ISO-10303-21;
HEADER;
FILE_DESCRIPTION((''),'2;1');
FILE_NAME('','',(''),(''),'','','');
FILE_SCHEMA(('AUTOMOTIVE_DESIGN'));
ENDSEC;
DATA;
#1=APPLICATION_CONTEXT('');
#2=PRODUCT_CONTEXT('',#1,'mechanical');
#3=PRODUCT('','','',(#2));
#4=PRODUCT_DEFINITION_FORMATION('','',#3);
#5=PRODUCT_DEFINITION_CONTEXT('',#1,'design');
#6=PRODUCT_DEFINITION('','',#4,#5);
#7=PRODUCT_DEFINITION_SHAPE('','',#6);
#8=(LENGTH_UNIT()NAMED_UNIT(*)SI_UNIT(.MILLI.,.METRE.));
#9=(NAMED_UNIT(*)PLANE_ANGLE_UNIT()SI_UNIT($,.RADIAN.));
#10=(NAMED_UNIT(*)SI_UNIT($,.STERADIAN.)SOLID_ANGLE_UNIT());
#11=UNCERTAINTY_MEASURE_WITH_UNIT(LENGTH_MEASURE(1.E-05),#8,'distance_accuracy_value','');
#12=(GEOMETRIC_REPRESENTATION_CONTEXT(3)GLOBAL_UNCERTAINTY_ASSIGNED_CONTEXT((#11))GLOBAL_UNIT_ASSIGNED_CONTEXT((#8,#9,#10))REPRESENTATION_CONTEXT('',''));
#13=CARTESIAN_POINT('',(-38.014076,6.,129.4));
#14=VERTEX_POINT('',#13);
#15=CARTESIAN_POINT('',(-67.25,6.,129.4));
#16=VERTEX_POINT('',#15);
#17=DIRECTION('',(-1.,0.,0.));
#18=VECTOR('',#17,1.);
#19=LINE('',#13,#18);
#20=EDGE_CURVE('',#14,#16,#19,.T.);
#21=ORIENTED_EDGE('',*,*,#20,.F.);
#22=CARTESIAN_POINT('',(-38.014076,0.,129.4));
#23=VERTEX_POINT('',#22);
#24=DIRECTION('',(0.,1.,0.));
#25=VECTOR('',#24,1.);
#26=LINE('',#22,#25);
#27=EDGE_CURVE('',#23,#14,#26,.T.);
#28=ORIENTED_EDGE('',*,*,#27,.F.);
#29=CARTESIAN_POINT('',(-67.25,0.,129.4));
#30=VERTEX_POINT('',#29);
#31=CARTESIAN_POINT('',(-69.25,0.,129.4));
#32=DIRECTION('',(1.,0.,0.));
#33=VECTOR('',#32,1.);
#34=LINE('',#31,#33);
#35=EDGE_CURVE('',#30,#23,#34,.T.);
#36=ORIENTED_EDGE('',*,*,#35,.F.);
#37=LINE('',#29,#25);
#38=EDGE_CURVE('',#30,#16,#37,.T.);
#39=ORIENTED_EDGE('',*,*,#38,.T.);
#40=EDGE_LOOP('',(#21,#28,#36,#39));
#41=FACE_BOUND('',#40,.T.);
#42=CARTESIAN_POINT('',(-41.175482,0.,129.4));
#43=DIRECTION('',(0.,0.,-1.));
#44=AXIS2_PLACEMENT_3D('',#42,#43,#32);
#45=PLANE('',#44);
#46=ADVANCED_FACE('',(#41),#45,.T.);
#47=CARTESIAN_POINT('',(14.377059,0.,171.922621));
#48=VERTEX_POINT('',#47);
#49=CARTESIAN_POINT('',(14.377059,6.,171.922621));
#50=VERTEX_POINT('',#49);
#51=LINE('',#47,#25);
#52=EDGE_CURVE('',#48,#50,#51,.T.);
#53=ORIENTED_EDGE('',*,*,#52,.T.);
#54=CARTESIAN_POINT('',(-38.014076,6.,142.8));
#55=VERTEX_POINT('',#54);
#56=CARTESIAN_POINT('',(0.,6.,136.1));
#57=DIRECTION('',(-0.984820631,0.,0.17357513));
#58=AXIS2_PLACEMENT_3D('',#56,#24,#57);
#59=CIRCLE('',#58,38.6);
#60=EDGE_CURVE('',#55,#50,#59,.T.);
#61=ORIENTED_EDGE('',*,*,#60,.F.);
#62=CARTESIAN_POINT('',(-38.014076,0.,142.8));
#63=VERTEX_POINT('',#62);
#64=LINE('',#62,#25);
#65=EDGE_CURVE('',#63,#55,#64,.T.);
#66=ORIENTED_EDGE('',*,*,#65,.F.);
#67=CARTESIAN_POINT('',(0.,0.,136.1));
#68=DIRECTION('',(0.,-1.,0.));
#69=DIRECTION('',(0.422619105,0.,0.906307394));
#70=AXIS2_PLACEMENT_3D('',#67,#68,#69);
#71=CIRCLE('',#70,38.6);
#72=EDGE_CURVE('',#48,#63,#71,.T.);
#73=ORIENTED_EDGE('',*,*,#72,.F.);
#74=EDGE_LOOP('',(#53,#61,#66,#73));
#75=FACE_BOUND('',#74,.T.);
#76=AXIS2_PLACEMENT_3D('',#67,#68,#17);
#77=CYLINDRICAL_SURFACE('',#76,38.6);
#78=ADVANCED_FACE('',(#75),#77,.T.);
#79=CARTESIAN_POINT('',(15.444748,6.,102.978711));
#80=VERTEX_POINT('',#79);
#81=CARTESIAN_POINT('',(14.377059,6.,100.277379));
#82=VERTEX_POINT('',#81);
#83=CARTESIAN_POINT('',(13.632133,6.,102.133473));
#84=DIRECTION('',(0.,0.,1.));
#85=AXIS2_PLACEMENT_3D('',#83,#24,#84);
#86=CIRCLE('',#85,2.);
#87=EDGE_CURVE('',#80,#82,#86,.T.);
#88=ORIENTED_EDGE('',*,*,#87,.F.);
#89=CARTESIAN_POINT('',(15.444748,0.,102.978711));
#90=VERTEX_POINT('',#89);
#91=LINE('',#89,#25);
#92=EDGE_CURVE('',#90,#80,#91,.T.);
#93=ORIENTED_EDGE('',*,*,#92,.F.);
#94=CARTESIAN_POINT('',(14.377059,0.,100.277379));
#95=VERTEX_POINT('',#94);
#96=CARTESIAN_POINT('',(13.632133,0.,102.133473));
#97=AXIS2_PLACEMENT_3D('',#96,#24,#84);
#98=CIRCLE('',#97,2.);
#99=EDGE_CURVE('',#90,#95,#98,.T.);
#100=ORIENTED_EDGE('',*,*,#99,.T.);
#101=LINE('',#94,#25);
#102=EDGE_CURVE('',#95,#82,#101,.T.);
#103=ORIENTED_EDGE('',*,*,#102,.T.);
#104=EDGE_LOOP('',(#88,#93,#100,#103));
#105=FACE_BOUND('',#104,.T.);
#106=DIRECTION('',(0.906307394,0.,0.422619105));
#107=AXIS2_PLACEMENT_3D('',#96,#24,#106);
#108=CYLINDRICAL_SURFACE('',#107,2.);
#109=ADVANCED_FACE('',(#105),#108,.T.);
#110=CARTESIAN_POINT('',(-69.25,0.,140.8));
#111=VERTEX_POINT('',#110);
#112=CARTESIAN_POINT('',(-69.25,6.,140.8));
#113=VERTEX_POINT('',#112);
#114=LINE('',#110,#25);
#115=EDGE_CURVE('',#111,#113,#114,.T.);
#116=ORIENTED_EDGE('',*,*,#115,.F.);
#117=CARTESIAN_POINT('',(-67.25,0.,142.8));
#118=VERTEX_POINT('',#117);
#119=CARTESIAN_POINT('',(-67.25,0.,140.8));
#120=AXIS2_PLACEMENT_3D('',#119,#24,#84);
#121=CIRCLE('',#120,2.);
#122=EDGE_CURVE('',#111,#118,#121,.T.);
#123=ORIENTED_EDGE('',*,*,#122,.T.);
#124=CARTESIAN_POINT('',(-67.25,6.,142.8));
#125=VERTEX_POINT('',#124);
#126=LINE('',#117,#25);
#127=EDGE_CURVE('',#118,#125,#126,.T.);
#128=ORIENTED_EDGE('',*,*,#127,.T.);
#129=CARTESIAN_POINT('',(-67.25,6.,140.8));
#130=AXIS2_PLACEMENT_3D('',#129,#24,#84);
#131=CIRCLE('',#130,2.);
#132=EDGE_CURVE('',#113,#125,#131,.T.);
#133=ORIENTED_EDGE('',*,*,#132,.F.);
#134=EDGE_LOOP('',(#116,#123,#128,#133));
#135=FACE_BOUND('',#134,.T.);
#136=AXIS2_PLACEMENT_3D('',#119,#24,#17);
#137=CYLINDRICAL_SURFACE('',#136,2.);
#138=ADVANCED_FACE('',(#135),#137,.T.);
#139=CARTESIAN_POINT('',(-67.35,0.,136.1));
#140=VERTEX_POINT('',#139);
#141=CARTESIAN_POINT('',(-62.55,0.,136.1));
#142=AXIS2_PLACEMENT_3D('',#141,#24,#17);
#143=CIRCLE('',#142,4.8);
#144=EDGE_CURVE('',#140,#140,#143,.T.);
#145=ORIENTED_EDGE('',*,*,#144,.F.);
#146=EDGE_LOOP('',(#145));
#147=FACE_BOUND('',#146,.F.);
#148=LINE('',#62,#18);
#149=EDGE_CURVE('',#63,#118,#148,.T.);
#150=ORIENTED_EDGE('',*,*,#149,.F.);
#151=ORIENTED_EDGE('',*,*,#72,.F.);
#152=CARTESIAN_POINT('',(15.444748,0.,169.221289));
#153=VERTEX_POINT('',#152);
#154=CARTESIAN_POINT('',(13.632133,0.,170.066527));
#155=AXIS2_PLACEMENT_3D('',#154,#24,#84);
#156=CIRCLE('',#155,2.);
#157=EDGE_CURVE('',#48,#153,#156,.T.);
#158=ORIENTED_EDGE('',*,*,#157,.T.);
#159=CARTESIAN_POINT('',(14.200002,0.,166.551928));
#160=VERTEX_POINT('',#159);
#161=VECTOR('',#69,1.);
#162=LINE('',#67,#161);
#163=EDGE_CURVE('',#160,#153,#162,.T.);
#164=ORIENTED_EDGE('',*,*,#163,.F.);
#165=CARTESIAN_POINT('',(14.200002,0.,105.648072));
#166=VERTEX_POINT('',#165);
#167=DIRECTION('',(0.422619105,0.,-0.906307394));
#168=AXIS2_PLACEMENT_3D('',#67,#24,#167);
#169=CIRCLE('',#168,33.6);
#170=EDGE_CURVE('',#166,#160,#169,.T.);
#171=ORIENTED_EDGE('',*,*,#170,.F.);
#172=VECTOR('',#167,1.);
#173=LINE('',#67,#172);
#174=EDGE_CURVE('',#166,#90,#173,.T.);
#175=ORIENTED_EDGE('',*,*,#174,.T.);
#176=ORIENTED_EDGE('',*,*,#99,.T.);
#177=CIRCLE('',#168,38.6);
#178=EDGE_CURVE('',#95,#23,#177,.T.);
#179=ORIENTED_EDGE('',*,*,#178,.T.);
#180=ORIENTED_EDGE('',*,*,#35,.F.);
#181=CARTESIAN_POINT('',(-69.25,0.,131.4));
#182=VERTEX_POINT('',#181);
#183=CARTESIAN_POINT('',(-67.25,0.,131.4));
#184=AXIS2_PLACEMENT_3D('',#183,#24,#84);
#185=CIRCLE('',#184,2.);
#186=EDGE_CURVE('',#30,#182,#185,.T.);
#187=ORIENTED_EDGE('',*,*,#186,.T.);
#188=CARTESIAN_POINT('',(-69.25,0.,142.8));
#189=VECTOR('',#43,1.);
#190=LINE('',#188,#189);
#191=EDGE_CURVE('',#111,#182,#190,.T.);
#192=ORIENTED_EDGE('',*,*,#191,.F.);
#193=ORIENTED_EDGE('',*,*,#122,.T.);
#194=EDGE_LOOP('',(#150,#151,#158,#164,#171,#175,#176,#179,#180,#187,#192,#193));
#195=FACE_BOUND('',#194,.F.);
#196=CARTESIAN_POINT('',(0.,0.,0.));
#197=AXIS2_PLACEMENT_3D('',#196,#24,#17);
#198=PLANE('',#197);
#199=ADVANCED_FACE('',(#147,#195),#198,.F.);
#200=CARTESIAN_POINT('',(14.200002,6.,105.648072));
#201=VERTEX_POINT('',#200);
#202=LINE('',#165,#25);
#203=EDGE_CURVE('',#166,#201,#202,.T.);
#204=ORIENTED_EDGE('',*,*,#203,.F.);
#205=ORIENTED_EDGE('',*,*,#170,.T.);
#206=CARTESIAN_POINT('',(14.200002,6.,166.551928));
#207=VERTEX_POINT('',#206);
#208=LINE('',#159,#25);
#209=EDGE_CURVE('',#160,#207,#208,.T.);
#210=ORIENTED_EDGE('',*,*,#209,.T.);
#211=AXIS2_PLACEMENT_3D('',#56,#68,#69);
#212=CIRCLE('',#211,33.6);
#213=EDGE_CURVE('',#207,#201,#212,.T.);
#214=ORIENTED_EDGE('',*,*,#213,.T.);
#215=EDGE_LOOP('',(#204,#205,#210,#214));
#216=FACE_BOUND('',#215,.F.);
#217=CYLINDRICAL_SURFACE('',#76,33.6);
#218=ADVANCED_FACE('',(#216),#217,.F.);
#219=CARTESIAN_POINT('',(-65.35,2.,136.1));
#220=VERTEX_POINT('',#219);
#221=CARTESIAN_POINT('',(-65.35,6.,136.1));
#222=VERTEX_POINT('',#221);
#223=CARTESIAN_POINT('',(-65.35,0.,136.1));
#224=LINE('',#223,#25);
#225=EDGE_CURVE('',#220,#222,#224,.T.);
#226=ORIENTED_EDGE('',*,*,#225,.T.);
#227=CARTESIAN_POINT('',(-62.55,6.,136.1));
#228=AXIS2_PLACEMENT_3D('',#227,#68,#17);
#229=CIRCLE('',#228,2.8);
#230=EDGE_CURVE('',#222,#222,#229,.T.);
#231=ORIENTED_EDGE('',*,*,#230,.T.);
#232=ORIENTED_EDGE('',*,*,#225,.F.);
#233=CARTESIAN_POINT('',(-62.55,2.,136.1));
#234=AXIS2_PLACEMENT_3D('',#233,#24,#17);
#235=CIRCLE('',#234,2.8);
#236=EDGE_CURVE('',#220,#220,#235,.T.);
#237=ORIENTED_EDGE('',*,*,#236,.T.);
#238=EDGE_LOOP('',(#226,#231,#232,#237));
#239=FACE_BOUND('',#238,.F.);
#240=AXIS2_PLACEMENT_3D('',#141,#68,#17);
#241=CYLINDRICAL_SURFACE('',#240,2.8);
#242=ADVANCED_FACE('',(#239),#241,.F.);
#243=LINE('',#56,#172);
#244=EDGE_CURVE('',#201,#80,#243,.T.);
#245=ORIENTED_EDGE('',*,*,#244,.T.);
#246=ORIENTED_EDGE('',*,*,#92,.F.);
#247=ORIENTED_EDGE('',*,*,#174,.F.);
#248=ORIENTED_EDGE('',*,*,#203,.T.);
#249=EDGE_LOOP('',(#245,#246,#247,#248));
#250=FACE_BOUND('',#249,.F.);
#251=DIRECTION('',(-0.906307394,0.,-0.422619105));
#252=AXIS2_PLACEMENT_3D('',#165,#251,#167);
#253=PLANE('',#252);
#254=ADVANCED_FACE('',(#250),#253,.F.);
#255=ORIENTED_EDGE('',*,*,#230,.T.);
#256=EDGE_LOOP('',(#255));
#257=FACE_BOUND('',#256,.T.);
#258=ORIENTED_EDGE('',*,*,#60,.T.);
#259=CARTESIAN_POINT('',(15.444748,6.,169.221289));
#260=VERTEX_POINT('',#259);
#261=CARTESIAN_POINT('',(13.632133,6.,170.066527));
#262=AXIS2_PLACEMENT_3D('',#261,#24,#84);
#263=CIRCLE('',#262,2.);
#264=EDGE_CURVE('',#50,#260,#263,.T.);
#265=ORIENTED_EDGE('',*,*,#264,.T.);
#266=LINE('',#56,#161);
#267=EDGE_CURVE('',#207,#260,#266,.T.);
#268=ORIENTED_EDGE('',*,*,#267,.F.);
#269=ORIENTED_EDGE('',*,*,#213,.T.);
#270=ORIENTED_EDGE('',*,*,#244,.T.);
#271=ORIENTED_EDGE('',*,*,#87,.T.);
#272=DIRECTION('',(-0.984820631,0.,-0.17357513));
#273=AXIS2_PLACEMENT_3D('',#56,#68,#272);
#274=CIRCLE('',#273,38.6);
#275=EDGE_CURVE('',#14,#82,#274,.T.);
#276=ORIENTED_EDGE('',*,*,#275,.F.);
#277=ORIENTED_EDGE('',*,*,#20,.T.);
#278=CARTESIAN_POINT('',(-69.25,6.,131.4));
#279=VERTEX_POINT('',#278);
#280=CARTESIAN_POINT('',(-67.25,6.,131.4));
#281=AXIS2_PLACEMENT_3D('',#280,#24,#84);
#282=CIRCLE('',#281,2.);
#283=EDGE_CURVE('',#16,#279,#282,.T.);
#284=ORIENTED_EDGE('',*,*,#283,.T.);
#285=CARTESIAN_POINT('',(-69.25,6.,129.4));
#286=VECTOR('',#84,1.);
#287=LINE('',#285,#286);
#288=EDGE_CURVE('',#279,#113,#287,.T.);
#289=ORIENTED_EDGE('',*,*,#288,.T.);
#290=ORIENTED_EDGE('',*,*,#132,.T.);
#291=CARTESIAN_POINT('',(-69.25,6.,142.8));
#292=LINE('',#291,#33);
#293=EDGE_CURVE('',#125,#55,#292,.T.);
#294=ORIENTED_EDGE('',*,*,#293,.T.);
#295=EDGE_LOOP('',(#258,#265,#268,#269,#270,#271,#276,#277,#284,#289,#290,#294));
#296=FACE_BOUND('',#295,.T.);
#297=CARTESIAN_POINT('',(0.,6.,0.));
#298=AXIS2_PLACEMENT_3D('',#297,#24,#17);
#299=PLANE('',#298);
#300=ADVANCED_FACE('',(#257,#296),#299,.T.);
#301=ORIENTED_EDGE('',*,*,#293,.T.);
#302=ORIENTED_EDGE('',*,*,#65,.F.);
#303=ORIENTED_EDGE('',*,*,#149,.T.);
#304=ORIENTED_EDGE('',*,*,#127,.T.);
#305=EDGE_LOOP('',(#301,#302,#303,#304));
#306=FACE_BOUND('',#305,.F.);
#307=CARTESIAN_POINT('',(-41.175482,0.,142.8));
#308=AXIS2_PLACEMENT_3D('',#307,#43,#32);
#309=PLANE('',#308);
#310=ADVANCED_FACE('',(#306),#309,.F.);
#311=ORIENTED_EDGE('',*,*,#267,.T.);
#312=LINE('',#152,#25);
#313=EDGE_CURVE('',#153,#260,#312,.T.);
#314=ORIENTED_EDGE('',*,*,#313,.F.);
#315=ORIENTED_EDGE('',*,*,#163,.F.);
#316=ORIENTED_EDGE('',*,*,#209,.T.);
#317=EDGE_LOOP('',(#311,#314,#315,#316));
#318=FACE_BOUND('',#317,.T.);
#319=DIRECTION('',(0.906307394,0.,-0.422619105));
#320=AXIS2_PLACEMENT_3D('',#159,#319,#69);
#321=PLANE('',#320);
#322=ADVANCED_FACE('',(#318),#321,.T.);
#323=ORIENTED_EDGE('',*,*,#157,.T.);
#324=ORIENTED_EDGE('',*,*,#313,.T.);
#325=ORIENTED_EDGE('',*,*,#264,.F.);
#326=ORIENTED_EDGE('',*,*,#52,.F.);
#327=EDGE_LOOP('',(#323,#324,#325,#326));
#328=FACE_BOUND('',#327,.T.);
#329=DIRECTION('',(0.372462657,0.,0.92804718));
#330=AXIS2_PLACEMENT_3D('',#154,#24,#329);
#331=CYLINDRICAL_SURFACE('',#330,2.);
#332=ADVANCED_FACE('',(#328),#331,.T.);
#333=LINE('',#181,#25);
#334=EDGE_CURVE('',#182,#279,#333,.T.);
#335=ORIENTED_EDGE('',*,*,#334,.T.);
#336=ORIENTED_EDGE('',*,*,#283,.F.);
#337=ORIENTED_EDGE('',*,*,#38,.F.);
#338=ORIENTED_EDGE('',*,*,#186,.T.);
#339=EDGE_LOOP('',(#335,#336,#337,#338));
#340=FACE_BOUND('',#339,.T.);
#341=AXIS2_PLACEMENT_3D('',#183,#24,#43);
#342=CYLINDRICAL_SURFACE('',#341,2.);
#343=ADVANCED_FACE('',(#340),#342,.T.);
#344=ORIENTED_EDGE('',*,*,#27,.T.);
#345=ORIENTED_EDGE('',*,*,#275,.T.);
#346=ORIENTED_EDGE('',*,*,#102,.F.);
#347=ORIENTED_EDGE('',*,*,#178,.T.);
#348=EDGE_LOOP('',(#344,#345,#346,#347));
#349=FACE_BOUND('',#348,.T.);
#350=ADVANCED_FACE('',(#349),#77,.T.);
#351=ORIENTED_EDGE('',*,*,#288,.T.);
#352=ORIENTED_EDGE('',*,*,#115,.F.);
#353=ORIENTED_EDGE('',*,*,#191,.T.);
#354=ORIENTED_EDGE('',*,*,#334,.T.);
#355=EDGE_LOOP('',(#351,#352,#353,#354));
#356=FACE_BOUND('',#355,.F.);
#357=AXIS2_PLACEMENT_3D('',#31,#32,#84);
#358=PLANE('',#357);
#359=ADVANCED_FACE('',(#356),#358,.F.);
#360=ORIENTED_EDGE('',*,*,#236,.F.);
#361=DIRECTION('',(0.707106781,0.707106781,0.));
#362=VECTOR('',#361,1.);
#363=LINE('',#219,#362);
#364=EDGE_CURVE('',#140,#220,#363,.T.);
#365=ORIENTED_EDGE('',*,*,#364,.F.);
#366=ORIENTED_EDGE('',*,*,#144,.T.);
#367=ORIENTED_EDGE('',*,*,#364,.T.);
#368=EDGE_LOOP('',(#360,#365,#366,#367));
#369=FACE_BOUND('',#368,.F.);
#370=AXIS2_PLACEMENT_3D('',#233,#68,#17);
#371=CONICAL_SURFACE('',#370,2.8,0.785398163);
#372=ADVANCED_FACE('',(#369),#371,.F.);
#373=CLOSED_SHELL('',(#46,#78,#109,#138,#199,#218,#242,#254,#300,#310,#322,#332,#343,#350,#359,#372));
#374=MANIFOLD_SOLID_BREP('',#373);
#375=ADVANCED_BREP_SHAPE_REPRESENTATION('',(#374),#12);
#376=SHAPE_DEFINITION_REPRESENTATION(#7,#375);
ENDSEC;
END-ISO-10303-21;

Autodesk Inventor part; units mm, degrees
ref_plane "YZ Plane" through (0, 0, 0) normal (1, 0, 0) x (0, 1, 0)
ref_plane "XZ Plane" through (0, 0, 0) normal (0, 1, 0) x (-1, 0, 0)
ref_plane "XY Plane" through (0, 0, 0) normal (0, 0, 1) x (1, 0, 0)
sketch "Sketch1" plane through (0, 0, 0) normal (0, 1, 0) x (-1, 0, 0)
  circle A0 centre (0, 0) radius 32.5
  line L0 (0, 32.5) -> (0, 102.5)
  line L1 (0, 102.5) -> (0, 169.7)
  circle A1 centre (0, 136.1) radius 33.6
  circle A2 centre (0, 136.1) radius 42.65
  line L2 (42.65, 136.1) -> (40.15, 136.1)
  line L3 (40.15, 136.1) -> (62.55, 136.1)
  circle A3 centre (62.55, 136.1) radius 22.4
  line L4 (62.55, 136.1) -> (62.55, 134.2)
  line L5 (62.55, 136.1) -> (62.55, 138)
  circle A4 centre (62.55, 136.1) radius 2.8
  line L6 (62.55, 138) -> (64.6067, 138)
  line L7 (62.55, 138) -> (60.4933, 138)
  line L8 (62.55, 134.2) -> (60.4933, 134.2)
  line L9 (62.55, 134.2) -> (64.6067, 134.2)
  circle A5 centre (62.55, 136.1) radius 4.7
  line L10 (0, -32.5) -> (0, -37.5)
  circle A6 centre (0, 0) radius 37.5
  line L11 (0, 32.5) -> (5, 32.5)
  line L12 (5, 32.5) -> (5, 93.7441)
  line L13 (0, 32.5) -> (-5, 32.5)
  line L14 (-5, 32.5) -> (-5, 93.7441)
  line L15 (0, 0) -> (29.257, 0) construction
  line L16 (0, 0) -> (37.5, 0) construction
  line L17 (0, 0) -> (32.476, 18.75)
  line L18 (0, 0) -> (37.5, 0) construction
  line L19 (0, 0) -> (-32.476, 18.75)
  line L20 (0, 0) -> (37.5, 0) construction
  line L21 (0, 169.7) -> (0, 174.7)
  circle A7 centre (0, 136.1) radius 38.6
  line L22 (67.25, 136.1) -> (69.25, 136.1)
  line L23 (62.55, 140.8) -> (62.55, 142.8)
  line L24 (62.55, 131.4) -> (62.55, 129.4)
  line L25 (5, 93.7441) -> (5, 102.8741)
  line L26 (-5, 93.7441) -> (-5, 102.8741)
  line L27 (62.55, 129.4) -> (32.9252, 129.4)
  line L28 (62.55, 142.8) -> (32.9252, 142.8)
  line L29 (62.55, 142.8) -> (69.25, 142.8)
  line L30 (69.25, 142.8) -> (69.25, 136.1)
  line L31 (69.25, 129.4) -> (69.25, 136.1)
  line L32 (69.25, 129.4) -> (62.55, 129.4)
  line L33 (0, 136.1) -> (-18.0247, 97.446)
  line L34 (0, 136.1) -> (42.65, 136.1) construction
  line L35 (0, 136.1) -> (-18.0247, 174.754)
  line L36 (0, 136.1) -> (42.65, 136.1) construction
  point P0 (37.3613, 126.4)
  point P1 (41.8047, 144.5494)
  point P2 (41.8047, 127.6506)
  point P3 (42.1205, 129.4)
  point P4 (42.1205, 142.8)
  point P5 (5, 97.8252)
  point P6 (38.0141, 129.4)
  point P7 (41.1755, 129.4)
  point P8 (41.1755, 142.8)
  point P9 (38.0141, 142.8)
  point P10 (-5, 97.8252)
  point P11 (-16.3131, 171.0835)
  point P12 (-14.2, 166.5519)
  point P13 (-14.2, 105.6481)
  point P14 (-16.3131, 101.1165)
  dimension "d0" = 65
  dimension "d1" = 70
  dimension "d2" = 67.2
  dimension "d3" = 85.3
  dimension "d4" = 2.5
  dimension "d6" = 22.4
  dimension "d7" = 1.9
  dimension "d8" = 1.9
  dimension "d9" = 5.6
  dimension "d10" = 9.4
  dimension "d11" = 5
  dimension "d12" = 5
  dimension "d13" = 5
  dimension "d16" = 30
  dimension "d17" = 150
  dimension "d18" = 5
  dimension "d19" = 2
  dimension "d20" = 2
  dimension "d21" = 2
  dimension "d28" = 115
  dimension "d29" = 115
extrude "Extrusion1" add sketch "Sketch1" along normal blind 6 contours A7 L26 A1 L0 | L0 A1 L25 A7 | A7 L33 A1 L26 | L25 A1 L27 A7 | L27 A3 L2 A2 | A2 L3 A5 L24 L27 | L27 A7 L28 A3 | L27 A1 L28 A7 | A7 L21 A1 L35 | L2 A3 L28 A2 | A2 L28 L23 A5 L3 | L24 A5 L22 L31 L32 | L21 A7 L28 A1 | A5 | L29 L30 L22 A5 L23
chamfer "Chamfer1" distance 2 angle 45 1 edges at (-59.75, 0, 136.1)
fillet "Fillet1" radius 2 4 edges at (-69.25, 3, 129.4) (-69.25, 3, 142.8) (16.3131, 3, 101.1165) (16.3131, 3, 171.0835)
properties part number "door mount backplate"
